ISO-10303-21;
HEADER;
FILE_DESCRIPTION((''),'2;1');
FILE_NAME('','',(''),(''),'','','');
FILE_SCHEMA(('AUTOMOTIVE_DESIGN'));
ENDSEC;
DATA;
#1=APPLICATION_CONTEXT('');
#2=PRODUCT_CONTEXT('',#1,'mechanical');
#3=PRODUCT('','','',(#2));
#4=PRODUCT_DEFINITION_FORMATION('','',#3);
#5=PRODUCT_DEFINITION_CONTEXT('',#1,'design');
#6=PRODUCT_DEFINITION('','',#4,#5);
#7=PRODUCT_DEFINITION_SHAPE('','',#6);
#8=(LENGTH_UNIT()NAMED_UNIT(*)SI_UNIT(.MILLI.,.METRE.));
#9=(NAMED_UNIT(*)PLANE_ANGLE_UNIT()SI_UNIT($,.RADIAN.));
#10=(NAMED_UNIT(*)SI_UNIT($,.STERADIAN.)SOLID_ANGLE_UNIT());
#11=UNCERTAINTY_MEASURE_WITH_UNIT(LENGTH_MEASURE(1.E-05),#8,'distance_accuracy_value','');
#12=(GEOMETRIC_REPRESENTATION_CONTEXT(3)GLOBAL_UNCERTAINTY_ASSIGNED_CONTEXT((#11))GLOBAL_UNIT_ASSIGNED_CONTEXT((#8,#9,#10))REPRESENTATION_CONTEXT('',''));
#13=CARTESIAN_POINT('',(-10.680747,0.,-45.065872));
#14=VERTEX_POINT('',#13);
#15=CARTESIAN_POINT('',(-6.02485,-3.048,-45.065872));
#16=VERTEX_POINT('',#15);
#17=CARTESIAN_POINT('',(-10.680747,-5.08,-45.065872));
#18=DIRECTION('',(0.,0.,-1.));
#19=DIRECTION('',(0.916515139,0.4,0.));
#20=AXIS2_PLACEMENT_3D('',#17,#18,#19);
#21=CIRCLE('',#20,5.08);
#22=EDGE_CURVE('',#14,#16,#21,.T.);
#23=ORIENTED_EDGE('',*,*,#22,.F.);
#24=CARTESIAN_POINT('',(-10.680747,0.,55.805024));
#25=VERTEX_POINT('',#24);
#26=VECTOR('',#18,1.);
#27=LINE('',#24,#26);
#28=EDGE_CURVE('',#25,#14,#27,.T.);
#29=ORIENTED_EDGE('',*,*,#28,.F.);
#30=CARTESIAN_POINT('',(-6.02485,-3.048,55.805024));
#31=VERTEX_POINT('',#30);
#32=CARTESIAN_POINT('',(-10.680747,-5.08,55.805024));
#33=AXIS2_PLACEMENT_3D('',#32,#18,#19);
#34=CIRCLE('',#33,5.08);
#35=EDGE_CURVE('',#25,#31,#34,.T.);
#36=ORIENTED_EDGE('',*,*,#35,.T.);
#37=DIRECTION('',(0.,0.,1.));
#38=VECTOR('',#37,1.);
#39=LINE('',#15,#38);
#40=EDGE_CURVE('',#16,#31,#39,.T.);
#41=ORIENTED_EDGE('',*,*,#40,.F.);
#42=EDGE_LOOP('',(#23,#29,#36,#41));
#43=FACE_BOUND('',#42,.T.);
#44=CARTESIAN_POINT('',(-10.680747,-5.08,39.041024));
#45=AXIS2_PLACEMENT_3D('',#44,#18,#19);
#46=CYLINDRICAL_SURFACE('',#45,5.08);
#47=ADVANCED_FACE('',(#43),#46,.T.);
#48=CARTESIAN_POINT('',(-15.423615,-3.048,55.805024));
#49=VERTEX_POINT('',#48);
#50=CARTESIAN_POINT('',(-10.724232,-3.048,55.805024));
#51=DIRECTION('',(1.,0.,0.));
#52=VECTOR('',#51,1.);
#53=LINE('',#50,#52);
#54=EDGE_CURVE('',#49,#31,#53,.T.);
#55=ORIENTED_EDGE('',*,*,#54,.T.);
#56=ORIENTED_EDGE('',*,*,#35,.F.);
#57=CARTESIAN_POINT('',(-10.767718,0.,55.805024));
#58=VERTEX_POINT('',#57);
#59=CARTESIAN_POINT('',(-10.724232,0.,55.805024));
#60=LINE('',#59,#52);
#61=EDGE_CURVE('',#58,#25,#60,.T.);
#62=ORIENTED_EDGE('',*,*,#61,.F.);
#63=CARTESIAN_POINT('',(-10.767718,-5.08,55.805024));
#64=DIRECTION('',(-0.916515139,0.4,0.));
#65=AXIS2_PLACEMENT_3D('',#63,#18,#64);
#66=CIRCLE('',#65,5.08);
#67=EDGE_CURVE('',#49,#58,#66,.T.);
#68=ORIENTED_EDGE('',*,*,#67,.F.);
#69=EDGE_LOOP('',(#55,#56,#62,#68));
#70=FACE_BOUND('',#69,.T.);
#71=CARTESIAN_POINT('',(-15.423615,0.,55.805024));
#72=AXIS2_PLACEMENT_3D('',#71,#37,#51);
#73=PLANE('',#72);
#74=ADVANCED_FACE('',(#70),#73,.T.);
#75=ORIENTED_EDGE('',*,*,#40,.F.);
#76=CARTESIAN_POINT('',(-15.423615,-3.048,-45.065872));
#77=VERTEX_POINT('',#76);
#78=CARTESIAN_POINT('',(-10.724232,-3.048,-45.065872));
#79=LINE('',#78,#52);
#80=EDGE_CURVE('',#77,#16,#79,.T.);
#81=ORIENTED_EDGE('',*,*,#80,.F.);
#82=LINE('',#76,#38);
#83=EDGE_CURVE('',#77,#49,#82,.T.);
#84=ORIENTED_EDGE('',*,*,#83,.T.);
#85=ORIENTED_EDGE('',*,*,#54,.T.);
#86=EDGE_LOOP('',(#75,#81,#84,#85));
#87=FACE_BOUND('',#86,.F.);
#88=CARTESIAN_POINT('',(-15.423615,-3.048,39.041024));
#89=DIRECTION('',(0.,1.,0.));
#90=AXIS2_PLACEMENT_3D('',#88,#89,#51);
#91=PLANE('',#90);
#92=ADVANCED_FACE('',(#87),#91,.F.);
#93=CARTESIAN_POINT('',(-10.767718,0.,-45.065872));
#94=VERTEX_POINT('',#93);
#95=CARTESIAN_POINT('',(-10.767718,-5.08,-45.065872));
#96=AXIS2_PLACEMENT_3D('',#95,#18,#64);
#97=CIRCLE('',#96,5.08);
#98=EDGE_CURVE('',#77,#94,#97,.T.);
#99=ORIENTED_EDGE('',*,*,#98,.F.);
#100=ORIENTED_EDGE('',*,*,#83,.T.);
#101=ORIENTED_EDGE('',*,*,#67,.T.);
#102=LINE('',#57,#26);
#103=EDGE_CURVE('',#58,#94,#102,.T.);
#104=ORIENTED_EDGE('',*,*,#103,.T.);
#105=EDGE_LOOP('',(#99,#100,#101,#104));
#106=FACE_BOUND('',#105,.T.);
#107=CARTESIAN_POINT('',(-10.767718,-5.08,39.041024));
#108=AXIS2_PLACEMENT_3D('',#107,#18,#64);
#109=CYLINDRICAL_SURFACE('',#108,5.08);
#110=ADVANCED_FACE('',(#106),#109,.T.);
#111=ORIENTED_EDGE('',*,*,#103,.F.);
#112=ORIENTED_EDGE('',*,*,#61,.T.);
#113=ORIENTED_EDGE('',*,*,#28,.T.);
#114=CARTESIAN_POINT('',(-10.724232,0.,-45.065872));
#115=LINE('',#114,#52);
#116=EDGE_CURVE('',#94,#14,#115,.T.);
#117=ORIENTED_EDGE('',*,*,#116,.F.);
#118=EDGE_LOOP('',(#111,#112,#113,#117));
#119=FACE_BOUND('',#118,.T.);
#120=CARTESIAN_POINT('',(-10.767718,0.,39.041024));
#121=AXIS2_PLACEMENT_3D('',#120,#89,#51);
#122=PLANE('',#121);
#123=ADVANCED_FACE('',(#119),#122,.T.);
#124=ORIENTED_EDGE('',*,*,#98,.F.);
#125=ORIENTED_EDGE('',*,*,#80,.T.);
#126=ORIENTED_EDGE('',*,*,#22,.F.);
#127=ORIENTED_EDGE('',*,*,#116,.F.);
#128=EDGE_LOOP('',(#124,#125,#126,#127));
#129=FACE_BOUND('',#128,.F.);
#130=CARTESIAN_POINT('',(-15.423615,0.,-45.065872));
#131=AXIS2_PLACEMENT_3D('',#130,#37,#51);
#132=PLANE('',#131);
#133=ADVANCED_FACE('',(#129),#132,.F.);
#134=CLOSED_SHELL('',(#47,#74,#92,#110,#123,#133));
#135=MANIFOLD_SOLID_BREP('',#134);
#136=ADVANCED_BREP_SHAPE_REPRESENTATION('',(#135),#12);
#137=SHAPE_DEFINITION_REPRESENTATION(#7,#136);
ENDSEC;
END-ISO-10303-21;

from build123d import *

# Parameters (mm, degrees)
F0_W        = 9.3987649307
F0_H        = 84.1068960726
F1_DEPTH    = 3.048
F2_T1_DEPTH = 107.386380603
F3_DEPTH    = 16.764


# Not quite as in the source:
# - a fillet or chamfer that OpenCascade refuses, or shapes differently, is made with other operations: its cross-section is extruded or revolved along the edge and cut away or added


with BuildPart() as f1:
    # F0 (on Front) → F1 (new body)
    with BuildSketch(Plane.XZ):
        with Locations((-10.7242320664, -3.0124243349)):
            Rectangle(F0_W, F0_H)
    extrude(amount=F1_DEPTH)

    # F2: fillet of radius 5.08 on 2 edges, made by hand

    # F2_s2 → F2_t1 (cut)
    with BuildSketch(Plane.XY.offset(-56.7056146364)):
        with BuildLine():
            ThreePointArc((-6.0248496011, -3.048), (-7.898315915, -0.8297670652), (-10.6807465072, 0))
            Line((-10.6807465072, 0), (-6.0248496011, 0))
            Line((-6.0248496011, 0), (-6.0248496011, -3.048))
        make_face()
        with BuildLine():
            ThreePointArc((-15.4236145318, -3.048), (-13.5501482178, -0.8297670652), (-10.7677176257, 0))
            Line((-10.7677176257, 0), (-15.4236145318, 0))
            Line((-15.4236145318, 0), (-15.4236145318, -3.048))
        make_face()
    extrude(amount=F2_T1_DEPTH, mode=Mode.SUBTRACT)

    # F3 (add): a face of the model
    f3_faces = [f1.faces().sort_by_distance(p)[0] for p in [
        (-10.7242320664, -1.7873359361, 39.0410237014),
    ]]
    extrude(f3_faces, amount=F3_DEPTH)


solid = f1.part
